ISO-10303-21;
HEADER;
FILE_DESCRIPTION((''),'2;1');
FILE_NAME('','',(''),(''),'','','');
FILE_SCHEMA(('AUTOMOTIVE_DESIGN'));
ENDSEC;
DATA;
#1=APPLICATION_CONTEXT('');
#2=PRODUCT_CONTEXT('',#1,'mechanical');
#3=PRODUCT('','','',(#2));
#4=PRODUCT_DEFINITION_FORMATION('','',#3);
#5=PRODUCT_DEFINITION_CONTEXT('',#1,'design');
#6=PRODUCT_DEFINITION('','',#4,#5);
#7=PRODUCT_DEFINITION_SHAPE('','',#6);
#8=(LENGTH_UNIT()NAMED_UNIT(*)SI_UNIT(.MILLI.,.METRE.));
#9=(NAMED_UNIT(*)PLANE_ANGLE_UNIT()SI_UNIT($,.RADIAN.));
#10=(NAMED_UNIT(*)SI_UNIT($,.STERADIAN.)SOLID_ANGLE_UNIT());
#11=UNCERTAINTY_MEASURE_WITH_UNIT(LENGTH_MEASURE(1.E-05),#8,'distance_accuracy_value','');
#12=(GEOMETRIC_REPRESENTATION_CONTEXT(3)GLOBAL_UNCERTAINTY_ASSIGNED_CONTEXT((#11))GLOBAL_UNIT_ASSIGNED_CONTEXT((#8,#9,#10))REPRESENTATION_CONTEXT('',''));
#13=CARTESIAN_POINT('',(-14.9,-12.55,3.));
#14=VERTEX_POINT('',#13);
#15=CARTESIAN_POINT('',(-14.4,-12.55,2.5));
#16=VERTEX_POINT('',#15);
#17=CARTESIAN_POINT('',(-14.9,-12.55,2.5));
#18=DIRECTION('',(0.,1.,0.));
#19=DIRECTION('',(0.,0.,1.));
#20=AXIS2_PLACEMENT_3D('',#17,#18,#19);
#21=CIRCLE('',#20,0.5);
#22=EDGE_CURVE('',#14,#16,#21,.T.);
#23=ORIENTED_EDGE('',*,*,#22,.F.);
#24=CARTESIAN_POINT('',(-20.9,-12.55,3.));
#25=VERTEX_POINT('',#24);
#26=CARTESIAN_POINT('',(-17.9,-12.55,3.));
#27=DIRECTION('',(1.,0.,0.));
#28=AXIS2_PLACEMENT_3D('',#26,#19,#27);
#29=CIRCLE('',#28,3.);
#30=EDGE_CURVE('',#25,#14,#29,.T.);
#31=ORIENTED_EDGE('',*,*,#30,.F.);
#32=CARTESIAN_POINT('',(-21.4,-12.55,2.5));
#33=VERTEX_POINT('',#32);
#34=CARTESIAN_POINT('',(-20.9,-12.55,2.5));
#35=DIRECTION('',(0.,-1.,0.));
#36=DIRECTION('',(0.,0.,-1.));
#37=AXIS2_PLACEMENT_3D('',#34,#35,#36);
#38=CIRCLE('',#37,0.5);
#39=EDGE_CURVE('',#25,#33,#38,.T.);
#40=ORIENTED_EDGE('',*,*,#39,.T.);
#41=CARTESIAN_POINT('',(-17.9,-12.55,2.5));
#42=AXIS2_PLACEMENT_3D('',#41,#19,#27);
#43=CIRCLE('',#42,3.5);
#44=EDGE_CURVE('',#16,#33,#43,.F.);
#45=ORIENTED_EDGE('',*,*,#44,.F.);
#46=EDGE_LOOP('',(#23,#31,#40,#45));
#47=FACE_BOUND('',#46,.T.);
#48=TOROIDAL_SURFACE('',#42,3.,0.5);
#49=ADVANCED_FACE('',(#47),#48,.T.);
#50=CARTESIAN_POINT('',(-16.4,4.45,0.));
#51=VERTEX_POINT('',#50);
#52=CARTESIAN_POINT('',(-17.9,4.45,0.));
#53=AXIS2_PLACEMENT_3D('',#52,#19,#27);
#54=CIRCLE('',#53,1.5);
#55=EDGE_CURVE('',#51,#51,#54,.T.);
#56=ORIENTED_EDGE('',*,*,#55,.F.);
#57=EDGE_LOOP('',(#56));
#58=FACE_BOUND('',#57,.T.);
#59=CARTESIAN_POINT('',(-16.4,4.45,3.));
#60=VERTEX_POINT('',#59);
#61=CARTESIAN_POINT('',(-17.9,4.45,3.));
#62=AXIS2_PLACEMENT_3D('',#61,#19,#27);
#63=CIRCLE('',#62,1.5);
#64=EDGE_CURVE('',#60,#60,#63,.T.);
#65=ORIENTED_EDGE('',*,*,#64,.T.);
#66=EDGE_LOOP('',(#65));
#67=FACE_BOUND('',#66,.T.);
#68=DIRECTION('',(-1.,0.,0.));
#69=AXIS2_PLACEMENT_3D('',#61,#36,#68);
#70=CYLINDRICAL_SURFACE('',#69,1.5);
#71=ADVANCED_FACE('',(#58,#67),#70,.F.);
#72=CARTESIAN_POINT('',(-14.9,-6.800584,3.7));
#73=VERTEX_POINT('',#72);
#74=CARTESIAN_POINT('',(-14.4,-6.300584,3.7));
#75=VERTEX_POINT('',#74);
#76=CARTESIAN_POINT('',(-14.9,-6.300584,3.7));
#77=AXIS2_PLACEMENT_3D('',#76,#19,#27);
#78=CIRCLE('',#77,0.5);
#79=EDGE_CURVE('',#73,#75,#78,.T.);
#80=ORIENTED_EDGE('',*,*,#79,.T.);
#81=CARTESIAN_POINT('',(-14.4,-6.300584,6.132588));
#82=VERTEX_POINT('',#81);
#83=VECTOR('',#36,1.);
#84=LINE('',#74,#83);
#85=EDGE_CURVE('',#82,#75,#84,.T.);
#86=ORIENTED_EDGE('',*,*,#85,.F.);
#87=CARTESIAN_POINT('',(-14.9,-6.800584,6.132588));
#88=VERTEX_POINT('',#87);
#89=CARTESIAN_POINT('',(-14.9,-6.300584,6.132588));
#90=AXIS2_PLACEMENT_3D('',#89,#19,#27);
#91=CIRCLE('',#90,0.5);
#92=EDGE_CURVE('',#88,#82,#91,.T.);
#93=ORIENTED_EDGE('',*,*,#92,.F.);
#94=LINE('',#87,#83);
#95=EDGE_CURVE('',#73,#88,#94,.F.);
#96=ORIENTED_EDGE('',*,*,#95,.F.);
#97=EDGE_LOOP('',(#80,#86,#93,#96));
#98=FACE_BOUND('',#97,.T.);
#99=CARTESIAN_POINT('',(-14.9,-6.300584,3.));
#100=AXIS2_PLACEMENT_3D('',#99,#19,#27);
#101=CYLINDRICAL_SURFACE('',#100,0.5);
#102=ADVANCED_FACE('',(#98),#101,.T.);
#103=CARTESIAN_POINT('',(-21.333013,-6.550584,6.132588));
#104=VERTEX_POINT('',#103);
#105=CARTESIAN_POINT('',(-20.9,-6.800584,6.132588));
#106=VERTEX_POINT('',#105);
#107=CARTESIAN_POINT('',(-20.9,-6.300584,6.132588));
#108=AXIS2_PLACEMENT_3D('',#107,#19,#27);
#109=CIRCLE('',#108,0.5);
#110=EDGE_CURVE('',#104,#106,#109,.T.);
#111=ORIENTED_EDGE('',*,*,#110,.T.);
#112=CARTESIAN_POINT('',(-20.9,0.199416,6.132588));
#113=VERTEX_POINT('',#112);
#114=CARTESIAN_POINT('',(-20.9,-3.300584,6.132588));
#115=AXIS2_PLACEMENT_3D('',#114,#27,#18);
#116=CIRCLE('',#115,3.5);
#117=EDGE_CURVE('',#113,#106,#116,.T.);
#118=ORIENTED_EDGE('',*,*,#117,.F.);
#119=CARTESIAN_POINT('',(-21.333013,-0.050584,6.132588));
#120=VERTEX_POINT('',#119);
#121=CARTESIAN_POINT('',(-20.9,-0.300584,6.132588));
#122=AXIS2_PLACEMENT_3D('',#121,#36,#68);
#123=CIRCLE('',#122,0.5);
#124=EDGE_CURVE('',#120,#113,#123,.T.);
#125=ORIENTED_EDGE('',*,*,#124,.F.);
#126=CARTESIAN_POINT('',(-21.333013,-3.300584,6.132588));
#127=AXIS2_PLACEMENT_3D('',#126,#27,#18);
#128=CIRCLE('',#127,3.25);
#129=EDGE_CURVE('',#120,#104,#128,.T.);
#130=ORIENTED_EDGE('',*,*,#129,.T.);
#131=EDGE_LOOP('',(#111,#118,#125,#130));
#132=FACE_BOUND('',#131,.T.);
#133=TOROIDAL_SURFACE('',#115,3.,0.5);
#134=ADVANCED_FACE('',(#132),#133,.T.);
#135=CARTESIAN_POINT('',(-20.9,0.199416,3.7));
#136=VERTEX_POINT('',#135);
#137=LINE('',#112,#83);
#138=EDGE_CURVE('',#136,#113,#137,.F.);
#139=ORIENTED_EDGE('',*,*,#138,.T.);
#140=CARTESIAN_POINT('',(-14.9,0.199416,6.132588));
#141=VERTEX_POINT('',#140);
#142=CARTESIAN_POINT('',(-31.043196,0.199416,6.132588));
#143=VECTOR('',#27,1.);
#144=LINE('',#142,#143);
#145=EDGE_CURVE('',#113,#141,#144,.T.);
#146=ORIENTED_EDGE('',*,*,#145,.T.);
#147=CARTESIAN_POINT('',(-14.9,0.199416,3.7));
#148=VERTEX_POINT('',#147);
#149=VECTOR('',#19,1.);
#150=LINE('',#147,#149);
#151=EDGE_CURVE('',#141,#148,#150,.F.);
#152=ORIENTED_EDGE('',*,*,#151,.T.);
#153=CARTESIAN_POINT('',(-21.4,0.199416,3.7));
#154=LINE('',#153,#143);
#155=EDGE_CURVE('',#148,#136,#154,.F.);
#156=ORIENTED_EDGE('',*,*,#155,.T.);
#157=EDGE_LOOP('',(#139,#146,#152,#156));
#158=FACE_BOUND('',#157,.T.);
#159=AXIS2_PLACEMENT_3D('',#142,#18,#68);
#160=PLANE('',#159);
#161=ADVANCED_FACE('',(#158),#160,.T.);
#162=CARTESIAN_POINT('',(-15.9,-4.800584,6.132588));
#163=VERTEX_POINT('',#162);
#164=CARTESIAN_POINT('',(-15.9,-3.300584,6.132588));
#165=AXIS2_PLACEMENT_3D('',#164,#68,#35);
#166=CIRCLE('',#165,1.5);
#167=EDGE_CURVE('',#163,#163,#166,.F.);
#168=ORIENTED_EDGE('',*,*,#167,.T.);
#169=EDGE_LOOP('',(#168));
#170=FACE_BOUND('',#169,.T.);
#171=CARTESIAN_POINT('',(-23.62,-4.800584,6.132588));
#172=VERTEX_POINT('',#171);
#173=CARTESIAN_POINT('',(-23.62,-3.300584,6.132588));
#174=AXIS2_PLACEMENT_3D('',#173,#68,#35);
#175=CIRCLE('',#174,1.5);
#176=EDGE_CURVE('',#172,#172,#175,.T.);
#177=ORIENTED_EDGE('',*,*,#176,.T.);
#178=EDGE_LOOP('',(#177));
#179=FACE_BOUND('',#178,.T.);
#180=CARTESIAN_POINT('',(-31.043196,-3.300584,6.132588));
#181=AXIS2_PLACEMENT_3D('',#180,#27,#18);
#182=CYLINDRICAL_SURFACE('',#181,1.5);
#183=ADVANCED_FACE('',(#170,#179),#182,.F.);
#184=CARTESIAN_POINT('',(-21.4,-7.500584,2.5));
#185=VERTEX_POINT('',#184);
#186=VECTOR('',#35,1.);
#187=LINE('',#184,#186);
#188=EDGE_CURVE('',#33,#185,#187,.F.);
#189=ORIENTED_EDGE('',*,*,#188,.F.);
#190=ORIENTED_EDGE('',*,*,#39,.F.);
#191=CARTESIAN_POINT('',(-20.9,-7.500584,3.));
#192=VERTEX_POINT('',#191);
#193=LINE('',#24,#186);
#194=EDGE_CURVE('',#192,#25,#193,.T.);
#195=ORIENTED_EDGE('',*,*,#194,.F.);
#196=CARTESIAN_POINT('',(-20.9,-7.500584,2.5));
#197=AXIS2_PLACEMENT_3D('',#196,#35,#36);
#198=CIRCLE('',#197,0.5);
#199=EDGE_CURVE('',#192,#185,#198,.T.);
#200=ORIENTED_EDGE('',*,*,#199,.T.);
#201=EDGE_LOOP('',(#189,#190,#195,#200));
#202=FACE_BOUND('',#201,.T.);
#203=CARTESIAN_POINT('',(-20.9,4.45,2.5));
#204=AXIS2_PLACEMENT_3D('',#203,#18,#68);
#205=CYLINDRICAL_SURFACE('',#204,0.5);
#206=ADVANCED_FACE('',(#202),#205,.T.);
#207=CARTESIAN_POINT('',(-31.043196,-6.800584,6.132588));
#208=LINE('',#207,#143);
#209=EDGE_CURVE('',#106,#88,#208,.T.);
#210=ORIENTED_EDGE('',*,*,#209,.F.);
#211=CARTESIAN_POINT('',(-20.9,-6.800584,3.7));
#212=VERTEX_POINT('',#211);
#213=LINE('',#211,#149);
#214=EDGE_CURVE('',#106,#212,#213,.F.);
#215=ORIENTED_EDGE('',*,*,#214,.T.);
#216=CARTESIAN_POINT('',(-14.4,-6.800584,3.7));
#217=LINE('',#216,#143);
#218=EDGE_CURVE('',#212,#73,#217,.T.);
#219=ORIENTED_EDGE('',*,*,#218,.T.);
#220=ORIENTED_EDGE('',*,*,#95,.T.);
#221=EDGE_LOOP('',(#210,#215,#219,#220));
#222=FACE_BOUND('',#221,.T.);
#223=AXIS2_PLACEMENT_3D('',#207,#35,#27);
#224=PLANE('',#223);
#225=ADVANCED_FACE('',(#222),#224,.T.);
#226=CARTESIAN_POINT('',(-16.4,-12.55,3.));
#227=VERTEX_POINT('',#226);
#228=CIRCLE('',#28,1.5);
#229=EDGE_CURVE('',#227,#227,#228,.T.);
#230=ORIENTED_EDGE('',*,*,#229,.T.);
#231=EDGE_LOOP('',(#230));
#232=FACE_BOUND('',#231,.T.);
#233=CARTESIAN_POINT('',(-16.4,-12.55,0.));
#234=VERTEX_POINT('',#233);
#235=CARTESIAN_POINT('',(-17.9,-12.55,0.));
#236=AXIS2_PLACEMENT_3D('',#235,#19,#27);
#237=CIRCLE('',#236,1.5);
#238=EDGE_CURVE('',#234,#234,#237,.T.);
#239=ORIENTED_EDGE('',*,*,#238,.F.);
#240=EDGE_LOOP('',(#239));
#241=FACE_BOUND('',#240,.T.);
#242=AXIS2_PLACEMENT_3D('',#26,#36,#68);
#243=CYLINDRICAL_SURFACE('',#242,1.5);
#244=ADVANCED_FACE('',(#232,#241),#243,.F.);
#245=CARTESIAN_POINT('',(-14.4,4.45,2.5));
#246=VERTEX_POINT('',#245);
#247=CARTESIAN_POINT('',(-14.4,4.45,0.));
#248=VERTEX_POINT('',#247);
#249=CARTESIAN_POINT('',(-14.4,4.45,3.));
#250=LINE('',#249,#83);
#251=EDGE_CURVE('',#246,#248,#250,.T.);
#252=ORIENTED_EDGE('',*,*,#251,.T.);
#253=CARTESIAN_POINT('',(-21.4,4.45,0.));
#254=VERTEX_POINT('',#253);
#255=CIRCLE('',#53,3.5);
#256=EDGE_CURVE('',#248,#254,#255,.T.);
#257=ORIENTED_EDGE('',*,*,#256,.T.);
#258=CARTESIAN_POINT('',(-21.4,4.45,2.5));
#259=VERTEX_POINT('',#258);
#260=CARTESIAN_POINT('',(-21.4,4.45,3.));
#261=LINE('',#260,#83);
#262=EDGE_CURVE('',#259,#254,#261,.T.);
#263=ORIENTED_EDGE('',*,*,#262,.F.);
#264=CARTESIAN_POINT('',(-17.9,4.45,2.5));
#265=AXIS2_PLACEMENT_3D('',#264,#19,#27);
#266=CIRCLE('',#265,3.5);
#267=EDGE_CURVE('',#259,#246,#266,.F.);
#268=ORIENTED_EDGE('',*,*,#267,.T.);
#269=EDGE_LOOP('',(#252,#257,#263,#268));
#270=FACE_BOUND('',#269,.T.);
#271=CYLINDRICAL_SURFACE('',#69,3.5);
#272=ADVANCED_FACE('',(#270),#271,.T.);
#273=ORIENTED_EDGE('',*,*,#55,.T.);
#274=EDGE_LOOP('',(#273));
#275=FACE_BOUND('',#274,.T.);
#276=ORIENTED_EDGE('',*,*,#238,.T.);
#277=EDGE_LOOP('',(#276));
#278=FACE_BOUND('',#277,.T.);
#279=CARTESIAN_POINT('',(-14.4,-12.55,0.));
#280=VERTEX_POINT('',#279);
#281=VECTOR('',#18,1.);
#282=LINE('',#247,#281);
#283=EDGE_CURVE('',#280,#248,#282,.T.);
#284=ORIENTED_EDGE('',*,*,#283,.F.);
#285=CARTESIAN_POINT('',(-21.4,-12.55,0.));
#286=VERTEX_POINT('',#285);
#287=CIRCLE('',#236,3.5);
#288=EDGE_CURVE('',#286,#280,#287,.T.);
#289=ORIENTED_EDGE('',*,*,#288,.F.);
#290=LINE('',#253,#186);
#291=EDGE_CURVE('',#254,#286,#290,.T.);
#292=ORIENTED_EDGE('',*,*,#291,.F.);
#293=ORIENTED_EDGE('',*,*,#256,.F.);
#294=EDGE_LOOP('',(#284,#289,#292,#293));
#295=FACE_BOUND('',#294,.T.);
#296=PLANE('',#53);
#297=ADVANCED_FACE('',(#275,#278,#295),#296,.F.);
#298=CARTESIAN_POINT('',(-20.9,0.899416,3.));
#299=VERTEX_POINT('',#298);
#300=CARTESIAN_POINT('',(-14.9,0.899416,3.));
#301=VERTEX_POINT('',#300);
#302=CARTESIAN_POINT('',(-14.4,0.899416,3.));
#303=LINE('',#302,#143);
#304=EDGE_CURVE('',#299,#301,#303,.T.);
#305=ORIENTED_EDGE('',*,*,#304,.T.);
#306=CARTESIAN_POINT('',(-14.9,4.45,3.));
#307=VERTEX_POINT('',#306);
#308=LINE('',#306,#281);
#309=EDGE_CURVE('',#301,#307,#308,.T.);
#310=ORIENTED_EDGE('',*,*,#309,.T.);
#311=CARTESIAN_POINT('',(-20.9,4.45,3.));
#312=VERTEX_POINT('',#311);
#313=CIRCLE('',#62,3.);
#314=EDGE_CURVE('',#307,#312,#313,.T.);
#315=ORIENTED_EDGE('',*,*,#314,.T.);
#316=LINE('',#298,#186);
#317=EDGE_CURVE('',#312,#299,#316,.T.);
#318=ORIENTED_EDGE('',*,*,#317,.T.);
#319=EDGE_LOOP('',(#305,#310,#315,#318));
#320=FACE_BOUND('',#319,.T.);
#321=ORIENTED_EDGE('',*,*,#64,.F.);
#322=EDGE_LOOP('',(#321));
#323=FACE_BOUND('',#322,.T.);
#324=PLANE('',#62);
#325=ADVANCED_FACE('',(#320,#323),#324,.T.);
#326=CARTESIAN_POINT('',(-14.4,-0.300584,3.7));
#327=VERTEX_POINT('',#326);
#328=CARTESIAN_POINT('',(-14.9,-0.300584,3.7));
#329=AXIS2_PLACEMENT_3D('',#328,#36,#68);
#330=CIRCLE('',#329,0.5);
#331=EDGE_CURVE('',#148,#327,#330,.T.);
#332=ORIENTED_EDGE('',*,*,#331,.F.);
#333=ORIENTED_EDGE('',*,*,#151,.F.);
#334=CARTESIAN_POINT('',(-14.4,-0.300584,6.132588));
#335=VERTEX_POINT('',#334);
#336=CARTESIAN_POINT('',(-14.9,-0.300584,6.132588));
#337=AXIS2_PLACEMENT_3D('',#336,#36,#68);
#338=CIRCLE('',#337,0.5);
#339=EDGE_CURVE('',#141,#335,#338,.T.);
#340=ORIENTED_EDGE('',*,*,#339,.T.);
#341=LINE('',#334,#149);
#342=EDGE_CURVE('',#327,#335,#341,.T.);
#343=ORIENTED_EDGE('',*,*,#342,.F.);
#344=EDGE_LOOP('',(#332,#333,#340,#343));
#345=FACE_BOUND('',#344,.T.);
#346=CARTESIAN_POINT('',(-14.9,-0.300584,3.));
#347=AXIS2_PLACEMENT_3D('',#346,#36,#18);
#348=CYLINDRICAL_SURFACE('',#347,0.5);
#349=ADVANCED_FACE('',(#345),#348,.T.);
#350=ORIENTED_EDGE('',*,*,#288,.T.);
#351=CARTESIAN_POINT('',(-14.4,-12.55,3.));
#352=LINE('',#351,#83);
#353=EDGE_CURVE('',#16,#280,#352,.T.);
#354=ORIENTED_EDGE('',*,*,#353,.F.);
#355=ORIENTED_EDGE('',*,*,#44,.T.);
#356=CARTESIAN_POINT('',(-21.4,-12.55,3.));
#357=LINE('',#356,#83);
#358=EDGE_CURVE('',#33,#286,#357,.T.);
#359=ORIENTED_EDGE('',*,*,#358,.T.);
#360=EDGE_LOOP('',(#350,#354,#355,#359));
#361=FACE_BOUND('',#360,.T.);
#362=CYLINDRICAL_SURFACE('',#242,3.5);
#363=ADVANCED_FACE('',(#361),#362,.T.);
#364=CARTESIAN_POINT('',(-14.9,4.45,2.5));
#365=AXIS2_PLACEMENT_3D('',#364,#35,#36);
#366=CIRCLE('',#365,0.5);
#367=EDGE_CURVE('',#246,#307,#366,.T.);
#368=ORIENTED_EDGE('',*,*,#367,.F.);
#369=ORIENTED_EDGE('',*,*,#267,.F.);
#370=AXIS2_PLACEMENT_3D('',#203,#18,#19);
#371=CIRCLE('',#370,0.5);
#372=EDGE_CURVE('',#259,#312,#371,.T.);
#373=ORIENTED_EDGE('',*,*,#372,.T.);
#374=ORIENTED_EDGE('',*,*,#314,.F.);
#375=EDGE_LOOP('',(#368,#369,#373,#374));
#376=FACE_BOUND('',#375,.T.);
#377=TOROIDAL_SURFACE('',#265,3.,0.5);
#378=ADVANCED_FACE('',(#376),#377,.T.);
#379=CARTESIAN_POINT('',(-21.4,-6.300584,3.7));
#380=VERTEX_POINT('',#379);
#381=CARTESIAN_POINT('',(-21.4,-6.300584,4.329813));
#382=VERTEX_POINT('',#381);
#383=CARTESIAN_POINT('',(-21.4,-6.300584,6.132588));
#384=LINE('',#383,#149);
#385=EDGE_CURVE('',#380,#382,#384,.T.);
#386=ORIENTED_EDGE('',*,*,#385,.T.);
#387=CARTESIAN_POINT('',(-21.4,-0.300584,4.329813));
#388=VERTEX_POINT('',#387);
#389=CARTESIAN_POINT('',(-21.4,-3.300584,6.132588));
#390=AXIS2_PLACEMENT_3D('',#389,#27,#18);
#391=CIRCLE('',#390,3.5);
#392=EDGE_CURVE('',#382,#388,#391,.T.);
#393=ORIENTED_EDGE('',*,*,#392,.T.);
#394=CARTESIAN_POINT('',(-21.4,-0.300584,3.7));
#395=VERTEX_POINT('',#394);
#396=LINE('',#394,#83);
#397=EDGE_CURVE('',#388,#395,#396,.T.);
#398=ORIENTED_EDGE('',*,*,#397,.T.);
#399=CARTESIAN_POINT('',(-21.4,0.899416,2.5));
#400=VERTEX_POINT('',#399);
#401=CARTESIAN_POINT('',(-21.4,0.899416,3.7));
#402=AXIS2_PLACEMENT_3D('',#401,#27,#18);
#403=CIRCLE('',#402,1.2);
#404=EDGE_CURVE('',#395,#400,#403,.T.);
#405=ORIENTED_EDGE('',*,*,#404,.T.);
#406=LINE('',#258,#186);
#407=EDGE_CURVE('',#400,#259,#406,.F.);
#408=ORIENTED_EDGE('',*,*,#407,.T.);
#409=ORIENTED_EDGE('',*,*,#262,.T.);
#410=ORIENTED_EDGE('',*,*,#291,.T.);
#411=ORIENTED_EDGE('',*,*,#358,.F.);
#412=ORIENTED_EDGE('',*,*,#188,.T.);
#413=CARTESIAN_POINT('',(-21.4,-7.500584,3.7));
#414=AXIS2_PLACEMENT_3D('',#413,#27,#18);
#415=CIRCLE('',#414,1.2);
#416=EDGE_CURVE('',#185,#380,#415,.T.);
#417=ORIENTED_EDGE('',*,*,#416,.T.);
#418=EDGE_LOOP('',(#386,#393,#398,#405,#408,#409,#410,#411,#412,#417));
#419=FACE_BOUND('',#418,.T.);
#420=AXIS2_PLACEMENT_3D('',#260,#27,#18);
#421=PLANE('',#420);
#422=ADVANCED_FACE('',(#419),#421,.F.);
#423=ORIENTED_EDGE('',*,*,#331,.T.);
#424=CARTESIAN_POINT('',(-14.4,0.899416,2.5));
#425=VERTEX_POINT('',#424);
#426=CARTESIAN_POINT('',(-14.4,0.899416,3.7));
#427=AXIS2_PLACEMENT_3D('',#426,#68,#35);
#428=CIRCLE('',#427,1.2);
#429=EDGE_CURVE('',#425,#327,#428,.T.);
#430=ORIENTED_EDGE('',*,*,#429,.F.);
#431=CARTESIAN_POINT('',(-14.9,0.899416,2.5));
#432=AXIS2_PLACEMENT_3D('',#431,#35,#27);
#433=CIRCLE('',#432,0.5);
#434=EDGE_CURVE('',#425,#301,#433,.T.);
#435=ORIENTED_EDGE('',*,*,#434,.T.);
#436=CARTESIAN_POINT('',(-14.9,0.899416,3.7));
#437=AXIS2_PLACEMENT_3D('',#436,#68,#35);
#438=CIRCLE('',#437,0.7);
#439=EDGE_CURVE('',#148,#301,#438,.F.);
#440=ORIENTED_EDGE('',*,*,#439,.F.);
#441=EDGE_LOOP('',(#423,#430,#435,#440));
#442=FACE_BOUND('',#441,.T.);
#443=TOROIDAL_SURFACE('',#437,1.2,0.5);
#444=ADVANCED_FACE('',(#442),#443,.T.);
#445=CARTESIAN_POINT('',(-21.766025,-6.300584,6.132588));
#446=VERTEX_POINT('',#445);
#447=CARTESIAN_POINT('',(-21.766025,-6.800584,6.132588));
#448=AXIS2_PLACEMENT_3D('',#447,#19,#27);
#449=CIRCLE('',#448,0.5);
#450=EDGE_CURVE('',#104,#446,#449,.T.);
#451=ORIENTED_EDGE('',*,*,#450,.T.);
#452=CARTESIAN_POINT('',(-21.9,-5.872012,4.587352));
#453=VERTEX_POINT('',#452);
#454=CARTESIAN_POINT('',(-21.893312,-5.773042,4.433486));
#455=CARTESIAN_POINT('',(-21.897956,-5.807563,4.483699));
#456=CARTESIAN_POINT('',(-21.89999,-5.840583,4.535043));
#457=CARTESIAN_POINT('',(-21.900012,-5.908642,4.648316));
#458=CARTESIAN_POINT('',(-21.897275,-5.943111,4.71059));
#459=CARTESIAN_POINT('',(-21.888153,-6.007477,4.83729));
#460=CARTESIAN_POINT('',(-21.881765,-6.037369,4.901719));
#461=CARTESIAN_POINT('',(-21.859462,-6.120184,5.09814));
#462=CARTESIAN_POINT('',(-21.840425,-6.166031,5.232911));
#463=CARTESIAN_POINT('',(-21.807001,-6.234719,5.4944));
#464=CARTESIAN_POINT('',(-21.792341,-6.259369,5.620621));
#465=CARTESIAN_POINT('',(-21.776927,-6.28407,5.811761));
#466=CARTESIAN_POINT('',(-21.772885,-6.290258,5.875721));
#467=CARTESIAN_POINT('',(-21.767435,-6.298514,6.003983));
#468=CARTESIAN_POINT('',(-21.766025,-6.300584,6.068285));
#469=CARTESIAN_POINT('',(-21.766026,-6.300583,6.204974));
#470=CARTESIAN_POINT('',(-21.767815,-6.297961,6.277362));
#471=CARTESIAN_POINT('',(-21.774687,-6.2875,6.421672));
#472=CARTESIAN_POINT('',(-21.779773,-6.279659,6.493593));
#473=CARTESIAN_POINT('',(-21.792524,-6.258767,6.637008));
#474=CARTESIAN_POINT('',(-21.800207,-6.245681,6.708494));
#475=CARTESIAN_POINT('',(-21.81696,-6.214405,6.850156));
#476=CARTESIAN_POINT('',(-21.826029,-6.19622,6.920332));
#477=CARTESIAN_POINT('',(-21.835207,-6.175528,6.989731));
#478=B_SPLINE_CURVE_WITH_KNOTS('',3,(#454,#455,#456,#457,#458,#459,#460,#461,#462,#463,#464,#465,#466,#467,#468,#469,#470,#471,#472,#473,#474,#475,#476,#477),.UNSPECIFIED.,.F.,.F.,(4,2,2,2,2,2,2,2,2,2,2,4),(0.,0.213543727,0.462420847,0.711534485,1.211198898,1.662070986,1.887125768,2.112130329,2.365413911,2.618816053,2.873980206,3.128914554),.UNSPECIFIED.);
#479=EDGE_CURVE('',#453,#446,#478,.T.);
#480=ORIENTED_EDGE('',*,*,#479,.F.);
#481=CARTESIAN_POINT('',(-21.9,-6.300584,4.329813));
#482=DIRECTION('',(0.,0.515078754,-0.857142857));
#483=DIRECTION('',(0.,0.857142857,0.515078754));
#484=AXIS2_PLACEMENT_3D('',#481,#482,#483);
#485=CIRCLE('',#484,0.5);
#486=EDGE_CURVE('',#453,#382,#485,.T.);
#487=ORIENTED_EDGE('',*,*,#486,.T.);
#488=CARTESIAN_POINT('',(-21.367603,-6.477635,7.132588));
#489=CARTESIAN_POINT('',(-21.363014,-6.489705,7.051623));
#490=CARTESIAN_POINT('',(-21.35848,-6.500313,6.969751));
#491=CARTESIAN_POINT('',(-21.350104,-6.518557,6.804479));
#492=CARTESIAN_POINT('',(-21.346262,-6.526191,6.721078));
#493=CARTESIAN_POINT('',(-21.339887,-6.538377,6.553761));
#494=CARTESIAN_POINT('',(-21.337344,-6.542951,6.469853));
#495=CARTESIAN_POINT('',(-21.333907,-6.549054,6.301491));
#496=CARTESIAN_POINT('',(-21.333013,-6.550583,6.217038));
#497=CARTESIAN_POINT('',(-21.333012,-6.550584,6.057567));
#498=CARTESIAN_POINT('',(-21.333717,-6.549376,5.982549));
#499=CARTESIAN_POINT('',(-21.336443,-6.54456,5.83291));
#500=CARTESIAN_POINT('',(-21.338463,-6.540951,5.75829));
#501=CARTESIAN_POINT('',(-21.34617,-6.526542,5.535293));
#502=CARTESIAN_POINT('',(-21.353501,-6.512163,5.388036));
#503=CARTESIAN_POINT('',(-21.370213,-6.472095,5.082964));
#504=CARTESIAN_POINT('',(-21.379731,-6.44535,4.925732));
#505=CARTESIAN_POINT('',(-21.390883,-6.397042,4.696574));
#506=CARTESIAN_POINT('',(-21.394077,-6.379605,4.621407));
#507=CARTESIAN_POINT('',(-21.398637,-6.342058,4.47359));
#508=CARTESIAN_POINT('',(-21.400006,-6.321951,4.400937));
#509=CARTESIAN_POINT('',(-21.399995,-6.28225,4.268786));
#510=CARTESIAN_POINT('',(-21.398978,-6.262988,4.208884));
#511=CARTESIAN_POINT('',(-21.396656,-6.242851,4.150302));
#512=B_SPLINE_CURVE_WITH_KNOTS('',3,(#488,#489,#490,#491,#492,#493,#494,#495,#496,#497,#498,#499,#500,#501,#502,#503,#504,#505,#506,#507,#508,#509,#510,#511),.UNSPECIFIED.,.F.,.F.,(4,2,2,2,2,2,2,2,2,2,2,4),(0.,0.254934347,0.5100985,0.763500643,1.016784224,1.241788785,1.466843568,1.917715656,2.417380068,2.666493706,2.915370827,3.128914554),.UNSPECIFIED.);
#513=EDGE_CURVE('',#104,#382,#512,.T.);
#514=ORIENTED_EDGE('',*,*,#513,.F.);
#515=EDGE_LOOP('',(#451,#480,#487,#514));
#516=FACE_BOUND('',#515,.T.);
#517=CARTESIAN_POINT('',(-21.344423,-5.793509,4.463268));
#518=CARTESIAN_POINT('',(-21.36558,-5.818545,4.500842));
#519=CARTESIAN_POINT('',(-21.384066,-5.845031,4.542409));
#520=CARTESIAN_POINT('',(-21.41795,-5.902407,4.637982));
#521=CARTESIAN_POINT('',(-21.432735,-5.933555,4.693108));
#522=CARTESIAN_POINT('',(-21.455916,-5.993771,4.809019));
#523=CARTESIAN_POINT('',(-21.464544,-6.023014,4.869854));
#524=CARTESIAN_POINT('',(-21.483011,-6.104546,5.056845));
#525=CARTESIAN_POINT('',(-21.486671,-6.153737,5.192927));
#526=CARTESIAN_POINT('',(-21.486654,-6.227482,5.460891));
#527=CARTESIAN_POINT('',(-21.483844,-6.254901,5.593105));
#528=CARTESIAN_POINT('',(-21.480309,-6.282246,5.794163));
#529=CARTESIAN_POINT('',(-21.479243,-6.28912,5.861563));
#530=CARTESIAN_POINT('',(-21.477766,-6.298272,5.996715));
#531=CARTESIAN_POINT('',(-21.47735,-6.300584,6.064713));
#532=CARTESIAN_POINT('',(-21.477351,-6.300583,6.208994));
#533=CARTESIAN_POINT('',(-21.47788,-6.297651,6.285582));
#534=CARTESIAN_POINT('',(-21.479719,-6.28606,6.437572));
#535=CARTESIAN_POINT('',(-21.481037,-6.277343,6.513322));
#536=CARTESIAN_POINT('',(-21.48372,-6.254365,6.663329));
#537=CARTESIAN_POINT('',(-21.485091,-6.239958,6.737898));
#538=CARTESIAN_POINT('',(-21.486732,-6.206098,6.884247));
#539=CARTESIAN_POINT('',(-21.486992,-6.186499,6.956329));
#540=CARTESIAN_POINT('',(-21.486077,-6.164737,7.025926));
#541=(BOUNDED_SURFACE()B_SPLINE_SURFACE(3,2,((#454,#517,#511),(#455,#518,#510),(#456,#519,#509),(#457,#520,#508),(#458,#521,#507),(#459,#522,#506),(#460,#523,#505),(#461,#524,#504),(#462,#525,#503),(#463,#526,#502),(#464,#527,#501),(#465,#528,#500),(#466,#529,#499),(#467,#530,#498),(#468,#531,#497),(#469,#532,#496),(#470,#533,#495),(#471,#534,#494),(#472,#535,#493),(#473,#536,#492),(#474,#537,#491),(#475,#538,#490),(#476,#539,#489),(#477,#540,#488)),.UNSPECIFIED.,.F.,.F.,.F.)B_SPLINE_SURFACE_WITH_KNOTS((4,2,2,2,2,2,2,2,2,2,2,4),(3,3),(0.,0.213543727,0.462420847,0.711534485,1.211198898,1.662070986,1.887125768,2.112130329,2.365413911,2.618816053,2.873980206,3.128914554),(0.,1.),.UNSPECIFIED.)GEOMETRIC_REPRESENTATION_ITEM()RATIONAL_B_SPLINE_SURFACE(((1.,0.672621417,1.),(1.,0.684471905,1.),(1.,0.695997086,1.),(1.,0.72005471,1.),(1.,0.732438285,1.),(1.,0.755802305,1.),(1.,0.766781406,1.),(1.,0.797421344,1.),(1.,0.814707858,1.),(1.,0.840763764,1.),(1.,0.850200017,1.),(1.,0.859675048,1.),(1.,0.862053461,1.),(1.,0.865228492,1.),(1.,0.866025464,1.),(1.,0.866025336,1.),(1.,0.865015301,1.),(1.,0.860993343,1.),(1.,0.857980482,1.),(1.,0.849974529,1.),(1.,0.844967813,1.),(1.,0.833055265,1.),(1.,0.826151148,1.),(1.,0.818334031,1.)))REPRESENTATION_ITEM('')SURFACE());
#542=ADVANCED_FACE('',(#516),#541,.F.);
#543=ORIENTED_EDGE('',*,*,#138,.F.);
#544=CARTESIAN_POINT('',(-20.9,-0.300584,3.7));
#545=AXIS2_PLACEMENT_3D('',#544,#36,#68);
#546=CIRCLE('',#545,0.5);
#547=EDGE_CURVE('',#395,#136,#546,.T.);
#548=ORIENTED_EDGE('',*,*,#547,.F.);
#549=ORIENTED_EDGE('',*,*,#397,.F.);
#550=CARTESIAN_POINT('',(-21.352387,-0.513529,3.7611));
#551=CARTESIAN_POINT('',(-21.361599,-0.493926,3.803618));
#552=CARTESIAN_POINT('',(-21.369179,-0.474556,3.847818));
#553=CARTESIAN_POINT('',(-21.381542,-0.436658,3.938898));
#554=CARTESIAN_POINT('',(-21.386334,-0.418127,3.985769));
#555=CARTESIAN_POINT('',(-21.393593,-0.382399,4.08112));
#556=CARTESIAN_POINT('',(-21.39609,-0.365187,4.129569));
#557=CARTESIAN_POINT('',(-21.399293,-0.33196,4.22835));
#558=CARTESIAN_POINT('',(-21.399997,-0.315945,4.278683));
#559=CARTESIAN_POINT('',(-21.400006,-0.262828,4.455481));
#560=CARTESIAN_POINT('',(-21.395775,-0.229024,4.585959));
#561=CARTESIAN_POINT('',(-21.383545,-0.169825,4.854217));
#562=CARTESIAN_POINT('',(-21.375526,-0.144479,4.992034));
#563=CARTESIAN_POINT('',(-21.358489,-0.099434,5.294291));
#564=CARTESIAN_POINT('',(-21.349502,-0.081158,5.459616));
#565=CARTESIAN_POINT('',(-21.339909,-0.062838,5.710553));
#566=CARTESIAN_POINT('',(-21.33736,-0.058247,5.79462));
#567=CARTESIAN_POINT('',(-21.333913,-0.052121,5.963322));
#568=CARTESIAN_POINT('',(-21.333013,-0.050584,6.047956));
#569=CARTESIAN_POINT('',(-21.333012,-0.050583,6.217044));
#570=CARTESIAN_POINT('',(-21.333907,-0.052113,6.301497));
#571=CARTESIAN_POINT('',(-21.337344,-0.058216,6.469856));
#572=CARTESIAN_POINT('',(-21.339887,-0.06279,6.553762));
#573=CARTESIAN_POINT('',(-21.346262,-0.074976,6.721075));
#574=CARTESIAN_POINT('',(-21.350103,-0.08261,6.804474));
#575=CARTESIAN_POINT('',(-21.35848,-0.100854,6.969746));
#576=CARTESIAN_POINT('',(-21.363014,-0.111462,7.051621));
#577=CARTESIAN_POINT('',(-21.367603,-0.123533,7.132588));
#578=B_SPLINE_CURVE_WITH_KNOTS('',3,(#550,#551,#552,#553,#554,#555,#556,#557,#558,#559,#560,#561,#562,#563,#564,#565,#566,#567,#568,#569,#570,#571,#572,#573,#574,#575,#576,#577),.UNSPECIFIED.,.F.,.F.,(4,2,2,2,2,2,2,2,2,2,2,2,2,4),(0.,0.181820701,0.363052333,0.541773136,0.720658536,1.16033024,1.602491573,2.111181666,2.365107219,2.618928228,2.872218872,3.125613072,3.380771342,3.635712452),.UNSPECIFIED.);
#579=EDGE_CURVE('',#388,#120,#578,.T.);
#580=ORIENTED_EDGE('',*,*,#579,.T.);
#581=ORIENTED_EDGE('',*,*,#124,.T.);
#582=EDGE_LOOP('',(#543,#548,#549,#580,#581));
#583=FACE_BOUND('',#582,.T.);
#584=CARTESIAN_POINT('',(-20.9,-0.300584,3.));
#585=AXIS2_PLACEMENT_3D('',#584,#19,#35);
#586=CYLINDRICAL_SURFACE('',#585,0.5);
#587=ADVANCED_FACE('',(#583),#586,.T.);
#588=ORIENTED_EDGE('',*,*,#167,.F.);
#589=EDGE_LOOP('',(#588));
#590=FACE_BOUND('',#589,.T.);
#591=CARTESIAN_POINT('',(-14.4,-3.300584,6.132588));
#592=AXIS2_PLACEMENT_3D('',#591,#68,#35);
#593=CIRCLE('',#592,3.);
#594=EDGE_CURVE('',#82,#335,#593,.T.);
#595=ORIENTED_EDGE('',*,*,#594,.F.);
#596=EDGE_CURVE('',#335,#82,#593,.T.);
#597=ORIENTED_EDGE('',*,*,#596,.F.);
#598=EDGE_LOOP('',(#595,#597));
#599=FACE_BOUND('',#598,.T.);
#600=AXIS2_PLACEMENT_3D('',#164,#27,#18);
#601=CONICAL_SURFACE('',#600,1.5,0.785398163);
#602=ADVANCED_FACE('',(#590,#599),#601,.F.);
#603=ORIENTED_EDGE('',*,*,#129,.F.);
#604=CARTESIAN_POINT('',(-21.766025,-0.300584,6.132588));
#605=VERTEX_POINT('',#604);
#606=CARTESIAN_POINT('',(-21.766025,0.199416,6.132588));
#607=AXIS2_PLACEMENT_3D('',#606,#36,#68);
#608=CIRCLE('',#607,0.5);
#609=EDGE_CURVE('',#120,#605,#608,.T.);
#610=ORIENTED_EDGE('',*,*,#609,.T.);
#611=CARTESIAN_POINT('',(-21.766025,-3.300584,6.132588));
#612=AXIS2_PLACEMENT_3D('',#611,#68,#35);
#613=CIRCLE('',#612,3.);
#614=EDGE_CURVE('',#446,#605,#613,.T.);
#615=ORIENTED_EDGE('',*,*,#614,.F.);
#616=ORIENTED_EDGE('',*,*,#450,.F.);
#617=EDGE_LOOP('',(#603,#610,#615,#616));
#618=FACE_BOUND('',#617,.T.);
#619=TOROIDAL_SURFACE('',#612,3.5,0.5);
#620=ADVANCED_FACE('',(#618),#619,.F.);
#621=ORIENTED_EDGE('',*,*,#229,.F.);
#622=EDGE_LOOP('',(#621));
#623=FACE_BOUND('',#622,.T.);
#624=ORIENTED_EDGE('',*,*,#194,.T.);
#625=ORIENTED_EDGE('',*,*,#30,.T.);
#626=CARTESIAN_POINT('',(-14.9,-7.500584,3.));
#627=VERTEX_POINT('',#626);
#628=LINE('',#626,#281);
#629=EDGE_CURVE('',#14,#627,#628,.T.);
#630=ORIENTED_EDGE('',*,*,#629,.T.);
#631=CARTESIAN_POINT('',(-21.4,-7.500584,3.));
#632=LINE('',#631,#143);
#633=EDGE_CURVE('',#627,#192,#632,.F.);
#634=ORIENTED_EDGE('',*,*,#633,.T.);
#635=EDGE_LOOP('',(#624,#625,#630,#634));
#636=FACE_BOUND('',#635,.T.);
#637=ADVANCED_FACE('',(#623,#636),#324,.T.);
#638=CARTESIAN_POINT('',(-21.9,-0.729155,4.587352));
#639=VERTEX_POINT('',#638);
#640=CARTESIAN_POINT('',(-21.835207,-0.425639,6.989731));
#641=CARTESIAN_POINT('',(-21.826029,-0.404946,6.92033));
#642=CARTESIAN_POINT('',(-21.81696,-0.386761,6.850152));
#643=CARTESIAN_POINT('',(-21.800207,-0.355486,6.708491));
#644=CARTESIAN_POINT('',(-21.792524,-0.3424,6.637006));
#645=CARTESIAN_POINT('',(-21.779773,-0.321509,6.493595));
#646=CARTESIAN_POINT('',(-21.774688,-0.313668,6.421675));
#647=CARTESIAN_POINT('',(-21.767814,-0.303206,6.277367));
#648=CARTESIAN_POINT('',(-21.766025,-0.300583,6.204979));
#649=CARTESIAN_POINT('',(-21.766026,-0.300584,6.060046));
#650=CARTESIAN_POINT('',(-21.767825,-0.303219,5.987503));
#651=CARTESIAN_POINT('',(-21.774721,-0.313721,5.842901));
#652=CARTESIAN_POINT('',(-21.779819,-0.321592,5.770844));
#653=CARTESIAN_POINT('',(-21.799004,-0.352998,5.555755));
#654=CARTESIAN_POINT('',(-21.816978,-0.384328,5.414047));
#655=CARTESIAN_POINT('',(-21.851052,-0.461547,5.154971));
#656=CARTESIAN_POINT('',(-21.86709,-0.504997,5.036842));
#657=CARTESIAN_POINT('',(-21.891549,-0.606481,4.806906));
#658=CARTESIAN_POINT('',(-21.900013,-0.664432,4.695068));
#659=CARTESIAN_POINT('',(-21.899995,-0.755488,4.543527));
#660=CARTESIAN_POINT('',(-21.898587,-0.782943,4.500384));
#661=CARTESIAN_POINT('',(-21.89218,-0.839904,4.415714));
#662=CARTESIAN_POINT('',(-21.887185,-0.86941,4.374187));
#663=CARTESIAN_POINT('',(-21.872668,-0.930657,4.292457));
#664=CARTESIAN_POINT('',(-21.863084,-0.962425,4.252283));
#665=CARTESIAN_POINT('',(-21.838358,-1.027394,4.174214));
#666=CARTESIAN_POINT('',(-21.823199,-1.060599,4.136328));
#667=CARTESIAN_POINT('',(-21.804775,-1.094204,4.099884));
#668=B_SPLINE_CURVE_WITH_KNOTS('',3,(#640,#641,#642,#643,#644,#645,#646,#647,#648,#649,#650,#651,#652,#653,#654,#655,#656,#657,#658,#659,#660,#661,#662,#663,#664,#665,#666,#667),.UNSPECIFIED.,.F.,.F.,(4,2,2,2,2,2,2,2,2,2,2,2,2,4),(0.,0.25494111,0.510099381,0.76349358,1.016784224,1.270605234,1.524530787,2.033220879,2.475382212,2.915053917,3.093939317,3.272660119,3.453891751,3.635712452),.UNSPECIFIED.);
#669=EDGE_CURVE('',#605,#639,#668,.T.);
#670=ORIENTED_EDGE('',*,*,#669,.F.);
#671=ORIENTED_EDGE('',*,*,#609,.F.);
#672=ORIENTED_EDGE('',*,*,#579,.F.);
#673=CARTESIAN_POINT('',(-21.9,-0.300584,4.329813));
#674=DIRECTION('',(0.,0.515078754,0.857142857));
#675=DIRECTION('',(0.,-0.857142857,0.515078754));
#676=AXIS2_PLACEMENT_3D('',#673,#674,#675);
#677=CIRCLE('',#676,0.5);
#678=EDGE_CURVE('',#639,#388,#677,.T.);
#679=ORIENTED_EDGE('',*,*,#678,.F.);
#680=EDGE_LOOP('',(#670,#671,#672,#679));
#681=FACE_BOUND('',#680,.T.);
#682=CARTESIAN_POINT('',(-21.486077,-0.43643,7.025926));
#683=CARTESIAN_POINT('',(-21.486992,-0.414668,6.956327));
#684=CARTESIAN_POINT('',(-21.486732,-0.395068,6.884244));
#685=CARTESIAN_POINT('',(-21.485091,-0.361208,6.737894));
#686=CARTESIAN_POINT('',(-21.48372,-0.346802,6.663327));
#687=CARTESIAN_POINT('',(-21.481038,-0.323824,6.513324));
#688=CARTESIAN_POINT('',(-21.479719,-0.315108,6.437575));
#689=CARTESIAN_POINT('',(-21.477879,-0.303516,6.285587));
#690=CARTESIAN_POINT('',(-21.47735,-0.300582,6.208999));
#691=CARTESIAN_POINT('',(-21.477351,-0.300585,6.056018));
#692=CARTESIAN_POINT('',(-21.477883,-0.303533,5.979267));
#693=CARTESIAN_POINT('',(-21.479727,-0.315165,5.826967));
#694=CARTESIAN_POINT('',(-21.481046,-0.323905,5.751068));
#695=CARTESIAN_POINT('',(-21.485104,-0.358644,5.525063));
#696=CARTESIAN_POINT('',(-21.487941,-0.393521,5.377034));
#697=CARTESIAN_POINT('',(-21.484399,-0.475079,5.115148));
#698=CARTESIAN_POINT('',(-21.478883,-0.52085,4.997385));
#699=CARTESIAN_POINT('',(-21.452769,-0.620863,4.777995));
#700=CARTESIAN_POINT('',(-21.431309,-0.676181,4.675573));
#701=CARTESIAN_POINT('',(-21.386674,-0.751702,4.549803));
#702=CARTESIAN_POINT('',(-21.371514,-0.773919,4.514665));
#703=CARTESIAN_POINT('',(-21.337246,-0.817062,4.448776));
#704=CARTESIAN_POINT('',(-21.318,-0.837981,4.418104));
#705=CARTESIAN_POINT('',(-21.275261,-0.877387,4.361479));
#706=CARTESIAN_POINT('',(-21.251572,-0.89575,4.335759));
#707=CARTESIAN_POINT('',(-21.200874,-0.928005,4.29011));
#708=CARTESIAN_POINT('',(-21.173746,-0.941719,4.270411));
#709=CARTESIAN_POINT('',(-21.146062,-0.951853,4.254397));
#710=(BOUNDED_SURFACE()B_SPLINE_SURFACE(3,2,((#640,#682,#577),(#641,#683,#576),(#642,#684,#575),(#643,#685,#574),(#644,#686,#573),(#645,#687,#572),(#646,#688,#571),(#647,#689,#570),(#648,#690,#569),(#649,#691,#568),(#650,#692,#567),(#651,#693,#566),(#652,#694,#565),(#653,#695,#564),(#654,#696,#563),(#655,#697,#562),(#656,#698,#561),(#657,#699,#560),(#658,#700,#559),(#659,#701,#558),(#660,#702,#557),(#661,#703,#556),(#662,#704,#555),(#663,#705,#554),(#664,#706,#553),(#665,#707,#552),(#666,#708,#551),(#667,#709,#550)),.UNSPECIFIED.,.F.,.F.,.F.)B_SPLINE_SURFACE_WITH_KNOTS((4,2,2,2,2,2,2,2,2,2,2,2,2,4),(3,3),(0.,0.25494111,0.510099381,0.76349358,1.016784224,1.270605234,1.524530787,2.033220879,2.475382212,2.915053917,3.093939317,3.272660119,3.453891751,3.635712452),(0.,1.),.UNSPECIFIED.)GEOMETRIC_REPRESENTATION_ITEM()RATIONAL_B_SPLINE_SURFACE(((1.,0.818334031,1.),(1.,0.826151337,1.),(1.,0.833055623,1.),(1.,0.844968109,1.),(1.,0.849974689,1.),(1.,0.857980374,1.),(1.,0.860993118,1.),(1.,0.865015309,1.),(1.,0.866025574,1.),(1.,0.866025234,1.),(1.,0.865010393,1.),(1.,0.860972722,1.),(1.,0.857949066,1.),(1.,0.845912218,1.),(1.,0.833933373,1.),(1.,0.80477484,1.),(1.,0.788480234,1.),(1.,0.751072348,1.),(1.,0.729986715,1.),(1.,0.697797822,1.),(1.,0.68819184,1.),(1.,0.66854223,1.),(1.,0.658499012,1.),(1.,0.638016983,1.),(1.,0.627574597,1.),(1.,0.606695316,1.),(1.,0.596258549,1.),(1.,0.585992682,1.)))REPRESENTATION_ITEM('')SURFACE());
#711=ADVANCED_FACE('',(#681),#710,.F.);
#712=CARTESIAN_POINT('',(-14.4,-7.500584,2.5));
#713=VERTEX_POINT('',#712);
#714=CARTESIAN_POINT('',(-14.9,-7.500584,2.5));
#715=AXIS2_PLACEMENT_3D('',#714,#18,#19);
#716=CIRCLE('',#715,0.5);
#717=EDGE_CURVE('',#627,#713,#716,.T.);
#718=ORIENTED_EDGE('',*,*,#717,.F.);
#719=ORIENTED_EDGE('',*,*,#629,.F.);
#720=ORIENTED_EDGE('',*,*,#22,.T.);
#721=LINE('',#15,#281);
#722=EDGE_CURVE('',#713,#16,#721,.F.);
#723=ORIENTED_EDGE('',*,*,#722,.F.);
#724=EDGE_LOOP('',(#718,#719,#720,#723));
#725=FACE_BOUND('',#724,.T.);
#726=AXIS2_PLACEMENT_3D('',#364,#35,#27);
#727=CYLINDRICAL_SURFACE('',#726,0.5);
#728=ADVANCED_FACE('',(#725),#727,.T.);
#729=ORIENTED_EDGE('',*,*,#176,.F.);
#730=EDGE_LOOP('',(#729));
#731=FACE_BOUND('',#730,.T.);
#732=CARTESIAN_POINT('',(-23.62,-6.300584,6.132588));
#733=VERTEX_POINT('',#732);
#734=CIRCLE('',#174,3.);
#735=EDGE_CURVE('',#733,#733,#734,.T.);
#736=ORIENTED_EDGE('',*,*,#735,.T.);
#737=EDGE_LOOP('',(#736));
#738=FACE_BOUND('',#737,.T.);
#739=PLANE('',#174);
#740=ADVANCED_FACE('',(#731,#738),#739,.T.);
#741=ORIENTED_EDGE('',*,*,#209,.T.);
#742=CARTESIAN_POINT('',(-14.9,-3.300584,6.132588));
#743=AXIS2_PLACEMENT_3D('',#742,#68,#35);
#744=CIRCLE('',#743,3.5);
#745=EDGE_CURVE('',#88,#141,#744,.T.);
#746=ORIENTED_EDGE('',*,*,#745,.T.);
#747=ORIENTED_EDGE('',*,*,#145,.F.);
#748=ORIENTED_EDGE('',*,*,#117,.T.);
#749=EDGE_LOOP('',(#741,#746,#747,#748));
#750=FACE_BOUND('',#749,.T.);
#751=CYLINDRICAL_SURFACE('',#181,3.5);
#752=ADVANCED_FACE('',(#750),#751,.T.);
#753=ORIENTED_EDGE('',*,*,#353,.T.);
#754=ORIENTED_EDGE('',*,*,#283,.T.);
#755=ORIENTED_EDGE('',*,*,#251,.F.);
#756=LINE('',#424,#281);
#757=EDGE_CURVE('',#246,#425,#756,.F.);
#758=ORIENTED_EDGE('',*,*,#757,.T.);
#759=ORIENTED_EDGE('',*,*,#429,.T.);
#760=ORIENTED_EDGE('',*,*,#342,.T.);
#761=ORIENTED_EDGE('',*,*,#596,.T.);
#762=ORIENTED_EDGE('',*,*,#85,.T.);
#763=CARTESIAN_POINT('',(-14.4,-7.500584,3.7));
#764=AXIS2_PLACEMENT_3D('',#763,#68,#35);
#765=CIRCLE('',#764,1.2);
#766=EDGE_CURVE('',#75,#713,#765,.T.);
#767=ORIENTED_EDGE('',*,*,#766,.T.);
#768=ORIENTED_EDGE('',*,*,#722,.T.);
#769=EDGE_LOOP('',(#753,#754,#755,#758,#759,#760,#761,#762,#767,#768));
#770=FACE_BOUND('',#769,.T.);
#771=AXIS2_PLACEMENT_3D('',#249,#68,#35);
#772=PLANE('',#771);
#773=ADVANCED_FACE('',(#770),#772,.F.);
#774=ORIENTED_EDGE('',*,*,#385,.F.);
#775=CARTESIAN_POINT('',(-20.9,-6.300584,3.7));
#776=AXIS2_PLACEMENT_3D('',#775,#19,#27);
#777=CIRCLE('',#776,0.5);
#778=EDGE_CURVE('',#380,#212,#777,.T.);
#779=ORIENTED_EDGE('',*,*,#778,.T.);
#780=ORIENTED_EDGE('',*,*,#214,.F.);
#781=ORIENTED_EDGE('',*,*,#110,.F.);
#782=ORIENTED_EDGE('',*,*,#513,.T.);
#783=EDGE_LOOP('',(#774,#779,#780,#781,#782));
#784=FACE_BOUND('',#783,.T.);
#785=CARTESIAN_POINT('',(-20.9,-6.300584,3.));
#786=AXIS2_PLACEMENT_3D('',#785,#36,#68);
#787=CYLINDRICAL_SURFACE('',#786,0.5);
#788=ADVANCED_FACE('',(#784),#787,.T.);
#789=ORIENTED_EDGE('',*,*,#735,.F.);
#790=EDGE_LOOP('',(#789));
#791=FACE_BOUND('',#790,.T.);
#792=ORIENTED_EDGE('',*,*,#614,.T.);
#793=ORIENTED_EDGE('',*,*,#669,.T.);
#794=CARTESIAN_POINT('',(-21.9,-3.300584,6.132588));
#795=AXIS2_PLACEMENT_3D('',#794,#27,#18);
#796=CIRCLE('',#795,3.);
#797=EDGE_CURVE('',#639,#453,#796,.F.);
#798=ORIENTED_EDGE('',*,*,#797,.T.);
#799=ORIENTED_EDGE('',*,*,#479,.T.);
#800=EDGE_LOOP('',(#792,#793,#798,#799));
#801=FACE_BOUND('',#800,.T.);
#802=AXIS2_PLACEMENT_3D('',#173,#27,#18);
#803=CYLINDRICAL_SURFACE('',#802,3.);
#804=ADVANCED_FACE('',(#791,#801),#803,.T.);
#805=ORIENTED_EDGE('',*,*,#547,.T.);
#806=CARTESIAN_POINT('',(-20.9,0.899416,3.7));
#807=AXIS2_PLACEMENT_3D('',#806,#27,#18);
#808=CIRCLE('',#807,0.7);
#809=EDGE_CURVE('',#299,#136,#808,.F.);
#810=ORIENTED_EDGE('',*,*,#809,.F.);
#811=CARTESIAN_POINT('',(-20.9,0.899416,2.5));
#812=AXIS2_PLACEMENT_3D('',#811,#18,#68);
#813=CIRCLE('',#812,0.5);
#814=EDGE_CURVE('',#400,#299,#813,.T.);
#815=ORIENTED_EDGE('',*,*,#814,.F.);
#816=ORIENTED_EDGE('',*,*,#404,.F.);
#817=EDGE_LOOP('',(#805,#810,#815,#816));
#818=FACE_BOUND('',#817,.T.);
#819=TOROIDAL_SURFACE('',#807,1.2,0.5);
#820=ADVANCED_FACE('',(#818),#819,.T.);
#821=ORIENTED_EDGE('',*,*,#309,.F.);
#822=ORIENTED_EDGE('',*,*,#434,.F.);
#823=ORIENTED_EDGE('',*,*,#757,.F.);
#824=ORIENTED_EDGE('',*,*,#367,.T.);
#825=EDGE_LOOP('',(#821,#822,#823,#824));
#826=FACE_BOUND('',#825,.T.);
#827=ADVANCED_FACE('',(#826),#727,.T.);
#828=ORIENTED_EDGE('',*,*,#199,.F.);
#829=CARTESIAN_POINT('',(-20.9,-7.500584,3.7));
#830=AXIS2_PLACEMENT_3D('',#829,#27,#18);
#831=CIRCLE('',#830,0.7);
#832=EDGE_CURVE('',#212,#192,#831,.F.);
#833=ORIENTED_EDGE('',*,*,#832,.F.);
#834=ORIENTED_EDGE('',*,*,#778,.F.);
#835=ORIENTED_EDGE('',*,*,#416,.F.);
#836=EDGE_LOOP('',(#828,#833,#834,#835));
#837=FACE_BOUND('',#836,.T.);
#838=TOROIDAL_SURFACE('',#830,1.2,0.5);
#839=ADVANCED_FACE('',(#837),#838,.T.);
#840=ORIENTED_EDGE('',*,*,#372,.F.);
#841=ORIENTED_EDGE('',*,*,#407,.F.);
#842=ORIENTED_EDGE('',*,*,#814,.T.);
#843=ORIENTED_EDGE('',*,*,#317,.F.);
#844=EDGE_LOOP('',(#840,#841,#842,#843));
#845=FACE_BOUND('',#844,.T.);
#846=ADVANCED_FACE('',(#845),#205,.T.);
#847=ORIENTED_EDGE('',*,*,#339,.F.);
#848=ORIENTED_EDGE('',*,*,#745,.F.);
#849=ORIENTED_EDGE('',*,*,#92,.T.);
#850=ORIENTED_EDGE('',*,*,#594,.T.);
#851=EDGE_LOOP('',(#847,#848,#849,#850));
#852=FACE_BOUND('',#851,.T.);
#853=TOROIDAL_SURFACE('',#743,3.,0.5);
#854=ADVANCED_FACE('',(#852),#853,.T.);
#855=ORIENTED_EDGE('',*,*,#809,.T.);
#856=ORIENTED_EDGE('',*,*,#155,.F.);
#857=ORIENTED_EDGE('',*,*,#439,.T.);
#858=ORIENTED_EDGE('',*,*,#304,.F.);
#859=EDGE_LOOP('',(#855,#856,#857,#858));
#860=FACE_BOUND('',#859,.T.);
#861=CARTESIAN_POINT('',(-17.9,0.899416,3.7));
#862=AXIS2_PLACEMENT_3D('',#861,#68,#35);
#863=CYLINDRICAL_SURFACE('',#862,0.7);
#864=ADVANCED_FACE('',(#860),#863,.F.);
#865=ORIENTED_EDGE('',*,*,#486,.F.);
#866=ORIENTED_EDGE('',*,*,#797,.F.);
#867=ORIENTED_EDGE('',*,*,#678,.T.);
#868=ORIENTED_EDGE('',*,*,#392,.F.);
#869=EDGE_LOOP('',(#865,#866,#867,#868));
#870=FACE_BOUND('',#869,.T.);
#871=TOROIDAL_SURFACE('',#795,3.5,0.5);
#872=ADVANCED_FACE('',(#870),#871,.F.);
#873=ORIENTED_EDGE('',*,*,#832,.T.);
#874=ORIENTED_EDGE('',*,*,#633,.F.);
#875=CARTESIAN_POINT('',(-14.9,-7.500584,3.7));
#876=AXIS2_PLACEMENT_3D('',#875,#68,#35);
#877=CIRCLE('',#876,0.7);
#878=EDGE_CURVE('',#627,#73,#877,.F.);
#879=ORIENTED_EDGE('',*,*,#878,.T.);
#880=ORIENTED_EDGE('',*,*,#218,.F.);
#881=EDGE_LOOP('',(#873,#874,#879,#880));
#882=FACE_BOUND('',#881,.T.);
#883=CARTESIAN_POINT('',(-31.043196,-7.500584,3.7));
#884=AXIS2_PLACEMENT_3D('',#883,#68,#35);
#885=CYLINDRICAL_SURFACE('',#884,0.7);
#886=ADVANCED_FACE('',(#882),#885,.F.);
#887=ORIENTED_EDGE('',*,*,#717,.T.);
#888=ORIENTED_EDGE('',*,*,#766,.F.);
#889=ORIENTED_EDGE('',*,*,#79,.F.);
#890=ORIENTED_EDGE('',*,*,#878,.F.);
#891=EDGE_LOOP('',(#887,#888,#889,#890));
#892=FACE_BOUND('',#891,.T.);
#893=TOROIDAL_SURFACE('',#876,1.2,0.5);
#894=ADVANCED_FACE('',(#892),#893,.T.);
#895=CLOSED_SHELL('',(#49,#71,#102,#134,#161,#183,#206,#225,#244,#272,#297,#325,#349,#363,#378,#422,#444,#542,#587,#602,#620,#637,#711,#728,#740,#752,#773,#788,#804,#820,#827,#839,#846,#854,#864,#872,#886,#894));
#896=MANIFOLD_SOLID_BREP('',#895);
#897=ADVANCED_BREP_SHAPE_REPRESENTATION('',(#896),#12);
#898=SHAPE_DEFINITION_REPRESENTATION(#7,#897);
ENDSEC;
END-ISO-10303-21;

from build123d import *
from build123d.topology import SkipClean

# Parameters (mm, degrees)
SKETCH_1_R      = 1.5
EXTRUDE_1_DEPTH = 3
SKETCH_2_R      = 1.5
EXTRUDE_2_DEPTH = 7
CHAMFER_1_SIZE  = 1.5
FILLET_1_R      = 0.7
FILLET_2_R      = 0.5
SKETCH_3_R      = 3
SKETCH_3_R_2    = 1.5
EXTRUDE_3_DEPTH = 2.22
FILLET_3_R      = 0.5


with BuildPart() as part:
    # 草图1 → 凸台-拉伸1 (new body)
    with BuildSketch(Plane.XY):
        with BuildLine():
            Line((-14.399999999, 4.45), (-14.399999999, -12.55))
            ThreePointArc((-14.399999999, -12.55), (-17.899999999, -16.05), (-21.399999999, -12.55))
            Line((-21.399999999, -12.55), (-21.399999999, 4.45))
            ThreePointArc((-21.399999999, 4.45), (-17.899999999, 7.95), (-14.399999999, 4.45))
        make_face()
        with Locations((-17.899999999, 4.45)):
            Circle(SKETCH_1_R, mode=Mode.SUBTRACT)
        with Locations((-17.899999999, -12.55)):
            Circle(SKETCH_1_R, mode=Mode.SUBTRACT)
    extrude(amount=EXTRUDE_1_DEPTH)

    # 草图2 → 凸台-拉伸2 (add)
    with BuildSketch(Plane(origin=(-14.399999999, 0, 0), x_dir=(0, 0, -1), z_dir=(1, 0, 0))):
        with BuildLine():
            Line((-6.132588308, 0.199416458), (-3, 0.199416458))
            Line((-3, 0.199416458), (-3, -6.800583542))
            Line((-3, -6.800583542), (-6.132588308, -6.800583542))
            ThreePointArc((-6.132588308, -6.800583542), (-9.632588308, -3.300583542), (-6.132588308, 0.199416458))
        make_face()
        with Locations(Location((-6.132588308, -3.300583542, 0), (0, 0, 90))):
            Circle(SKETCH_2_R, mode=Mode.SUBTRACT)
    extrude(amount=-EXTRUDE_2_DEPTH)

    # 倒角1
    chamfer_1_edges = [part.edges().sort_by_distance(p)[0] for p in [
        (-14.399999999, -4.800583542, 6.132588308),
    ]]
    chamfer(chamfer_1_edges, length=CHAMFER_1_SIZE)

    # 圆角1
    fillet_1_edges = [part.edges().sort_by_distance(p)[0] for p in [
        (-17.899999999, -6.800583542, 3),
        (-17.899999999, 0.199416458, 3),
    ]]
    fillet(fillet_1_edges, radius=FILLET_1_R)

    # 圆角2
    fillet_2_edges = [part.edges().sort_by_distance(p)[0] for p in [
        (-17.899999999, -16.05, 3),
        (-14.399999999, -10.025291771, 3),
        (-14.399999999, -3.300583542, 9.632588308),
        (-14.399999999, -6.800583542, 4.916294154),
        (-21.399999999, -3.300583542, 9.632588308),
        (-21.399999999, 0.199416458, 4.916294154),
        (-14.399999999, 2.674708229, 3),
        (-14.399999999, 0.199416458, 4.916294154),
        (-21.399999999, -6.800583542, 4.916294154),
        (-21.399999999, -10.025291771, 3),
        (-14.399999999, 0.404441711, 3.205025253),
        (-21.399999999, 0.404441711, 3.205025253),
        (-14.399999999, -7.005608796, 3.205025253),
        (-21.399999999, -7.005608796, 3.205025253),
        (-17.899999999, 7.95, 3),
        (-21.399999999, 2.674708229, 3),
    ]]
    fillet(fillet_2_edges, radius=FILLET_2_R - 0.0001)  # a hair under: the kernel refuses the full size

    # 草图3 → 凸台-拉伸3 (add)
    with SkipClean():  # the faces are left unmerged after this step: merging them gives an invalid solid
        with BuildSketch(Plane.ZY.offset(21.399999999)):
            with Locations(Location((6.132588308, -3.300583542, 0), (0, 0, 270))):
                Circle(SKETCH_3_R)
            with Locations(Location((6.132588308, -3.300583542, 0), (0, 0, 270))):
                Circle(SKETCH_3_R_2, mode=Mode.SUBTRACT)
        extrude(amount=EXTRUDE_3_DEPTH)
    add(part.part.scale(1), mode=Mode.REPLACE)  # the faces are merged on a copy

    # 圆角3
    fillet_3_edges = [part.edges().sort_by_distance(p)[0] for p in [
        (-21.399999999, -0.300583542, 6.132588308),
        (-21.399999999, -0.300583542, 6.132588308),
    ]]
    fillet(fillet_3_edges, radius=FILLET_3_R)


solid = part.part
